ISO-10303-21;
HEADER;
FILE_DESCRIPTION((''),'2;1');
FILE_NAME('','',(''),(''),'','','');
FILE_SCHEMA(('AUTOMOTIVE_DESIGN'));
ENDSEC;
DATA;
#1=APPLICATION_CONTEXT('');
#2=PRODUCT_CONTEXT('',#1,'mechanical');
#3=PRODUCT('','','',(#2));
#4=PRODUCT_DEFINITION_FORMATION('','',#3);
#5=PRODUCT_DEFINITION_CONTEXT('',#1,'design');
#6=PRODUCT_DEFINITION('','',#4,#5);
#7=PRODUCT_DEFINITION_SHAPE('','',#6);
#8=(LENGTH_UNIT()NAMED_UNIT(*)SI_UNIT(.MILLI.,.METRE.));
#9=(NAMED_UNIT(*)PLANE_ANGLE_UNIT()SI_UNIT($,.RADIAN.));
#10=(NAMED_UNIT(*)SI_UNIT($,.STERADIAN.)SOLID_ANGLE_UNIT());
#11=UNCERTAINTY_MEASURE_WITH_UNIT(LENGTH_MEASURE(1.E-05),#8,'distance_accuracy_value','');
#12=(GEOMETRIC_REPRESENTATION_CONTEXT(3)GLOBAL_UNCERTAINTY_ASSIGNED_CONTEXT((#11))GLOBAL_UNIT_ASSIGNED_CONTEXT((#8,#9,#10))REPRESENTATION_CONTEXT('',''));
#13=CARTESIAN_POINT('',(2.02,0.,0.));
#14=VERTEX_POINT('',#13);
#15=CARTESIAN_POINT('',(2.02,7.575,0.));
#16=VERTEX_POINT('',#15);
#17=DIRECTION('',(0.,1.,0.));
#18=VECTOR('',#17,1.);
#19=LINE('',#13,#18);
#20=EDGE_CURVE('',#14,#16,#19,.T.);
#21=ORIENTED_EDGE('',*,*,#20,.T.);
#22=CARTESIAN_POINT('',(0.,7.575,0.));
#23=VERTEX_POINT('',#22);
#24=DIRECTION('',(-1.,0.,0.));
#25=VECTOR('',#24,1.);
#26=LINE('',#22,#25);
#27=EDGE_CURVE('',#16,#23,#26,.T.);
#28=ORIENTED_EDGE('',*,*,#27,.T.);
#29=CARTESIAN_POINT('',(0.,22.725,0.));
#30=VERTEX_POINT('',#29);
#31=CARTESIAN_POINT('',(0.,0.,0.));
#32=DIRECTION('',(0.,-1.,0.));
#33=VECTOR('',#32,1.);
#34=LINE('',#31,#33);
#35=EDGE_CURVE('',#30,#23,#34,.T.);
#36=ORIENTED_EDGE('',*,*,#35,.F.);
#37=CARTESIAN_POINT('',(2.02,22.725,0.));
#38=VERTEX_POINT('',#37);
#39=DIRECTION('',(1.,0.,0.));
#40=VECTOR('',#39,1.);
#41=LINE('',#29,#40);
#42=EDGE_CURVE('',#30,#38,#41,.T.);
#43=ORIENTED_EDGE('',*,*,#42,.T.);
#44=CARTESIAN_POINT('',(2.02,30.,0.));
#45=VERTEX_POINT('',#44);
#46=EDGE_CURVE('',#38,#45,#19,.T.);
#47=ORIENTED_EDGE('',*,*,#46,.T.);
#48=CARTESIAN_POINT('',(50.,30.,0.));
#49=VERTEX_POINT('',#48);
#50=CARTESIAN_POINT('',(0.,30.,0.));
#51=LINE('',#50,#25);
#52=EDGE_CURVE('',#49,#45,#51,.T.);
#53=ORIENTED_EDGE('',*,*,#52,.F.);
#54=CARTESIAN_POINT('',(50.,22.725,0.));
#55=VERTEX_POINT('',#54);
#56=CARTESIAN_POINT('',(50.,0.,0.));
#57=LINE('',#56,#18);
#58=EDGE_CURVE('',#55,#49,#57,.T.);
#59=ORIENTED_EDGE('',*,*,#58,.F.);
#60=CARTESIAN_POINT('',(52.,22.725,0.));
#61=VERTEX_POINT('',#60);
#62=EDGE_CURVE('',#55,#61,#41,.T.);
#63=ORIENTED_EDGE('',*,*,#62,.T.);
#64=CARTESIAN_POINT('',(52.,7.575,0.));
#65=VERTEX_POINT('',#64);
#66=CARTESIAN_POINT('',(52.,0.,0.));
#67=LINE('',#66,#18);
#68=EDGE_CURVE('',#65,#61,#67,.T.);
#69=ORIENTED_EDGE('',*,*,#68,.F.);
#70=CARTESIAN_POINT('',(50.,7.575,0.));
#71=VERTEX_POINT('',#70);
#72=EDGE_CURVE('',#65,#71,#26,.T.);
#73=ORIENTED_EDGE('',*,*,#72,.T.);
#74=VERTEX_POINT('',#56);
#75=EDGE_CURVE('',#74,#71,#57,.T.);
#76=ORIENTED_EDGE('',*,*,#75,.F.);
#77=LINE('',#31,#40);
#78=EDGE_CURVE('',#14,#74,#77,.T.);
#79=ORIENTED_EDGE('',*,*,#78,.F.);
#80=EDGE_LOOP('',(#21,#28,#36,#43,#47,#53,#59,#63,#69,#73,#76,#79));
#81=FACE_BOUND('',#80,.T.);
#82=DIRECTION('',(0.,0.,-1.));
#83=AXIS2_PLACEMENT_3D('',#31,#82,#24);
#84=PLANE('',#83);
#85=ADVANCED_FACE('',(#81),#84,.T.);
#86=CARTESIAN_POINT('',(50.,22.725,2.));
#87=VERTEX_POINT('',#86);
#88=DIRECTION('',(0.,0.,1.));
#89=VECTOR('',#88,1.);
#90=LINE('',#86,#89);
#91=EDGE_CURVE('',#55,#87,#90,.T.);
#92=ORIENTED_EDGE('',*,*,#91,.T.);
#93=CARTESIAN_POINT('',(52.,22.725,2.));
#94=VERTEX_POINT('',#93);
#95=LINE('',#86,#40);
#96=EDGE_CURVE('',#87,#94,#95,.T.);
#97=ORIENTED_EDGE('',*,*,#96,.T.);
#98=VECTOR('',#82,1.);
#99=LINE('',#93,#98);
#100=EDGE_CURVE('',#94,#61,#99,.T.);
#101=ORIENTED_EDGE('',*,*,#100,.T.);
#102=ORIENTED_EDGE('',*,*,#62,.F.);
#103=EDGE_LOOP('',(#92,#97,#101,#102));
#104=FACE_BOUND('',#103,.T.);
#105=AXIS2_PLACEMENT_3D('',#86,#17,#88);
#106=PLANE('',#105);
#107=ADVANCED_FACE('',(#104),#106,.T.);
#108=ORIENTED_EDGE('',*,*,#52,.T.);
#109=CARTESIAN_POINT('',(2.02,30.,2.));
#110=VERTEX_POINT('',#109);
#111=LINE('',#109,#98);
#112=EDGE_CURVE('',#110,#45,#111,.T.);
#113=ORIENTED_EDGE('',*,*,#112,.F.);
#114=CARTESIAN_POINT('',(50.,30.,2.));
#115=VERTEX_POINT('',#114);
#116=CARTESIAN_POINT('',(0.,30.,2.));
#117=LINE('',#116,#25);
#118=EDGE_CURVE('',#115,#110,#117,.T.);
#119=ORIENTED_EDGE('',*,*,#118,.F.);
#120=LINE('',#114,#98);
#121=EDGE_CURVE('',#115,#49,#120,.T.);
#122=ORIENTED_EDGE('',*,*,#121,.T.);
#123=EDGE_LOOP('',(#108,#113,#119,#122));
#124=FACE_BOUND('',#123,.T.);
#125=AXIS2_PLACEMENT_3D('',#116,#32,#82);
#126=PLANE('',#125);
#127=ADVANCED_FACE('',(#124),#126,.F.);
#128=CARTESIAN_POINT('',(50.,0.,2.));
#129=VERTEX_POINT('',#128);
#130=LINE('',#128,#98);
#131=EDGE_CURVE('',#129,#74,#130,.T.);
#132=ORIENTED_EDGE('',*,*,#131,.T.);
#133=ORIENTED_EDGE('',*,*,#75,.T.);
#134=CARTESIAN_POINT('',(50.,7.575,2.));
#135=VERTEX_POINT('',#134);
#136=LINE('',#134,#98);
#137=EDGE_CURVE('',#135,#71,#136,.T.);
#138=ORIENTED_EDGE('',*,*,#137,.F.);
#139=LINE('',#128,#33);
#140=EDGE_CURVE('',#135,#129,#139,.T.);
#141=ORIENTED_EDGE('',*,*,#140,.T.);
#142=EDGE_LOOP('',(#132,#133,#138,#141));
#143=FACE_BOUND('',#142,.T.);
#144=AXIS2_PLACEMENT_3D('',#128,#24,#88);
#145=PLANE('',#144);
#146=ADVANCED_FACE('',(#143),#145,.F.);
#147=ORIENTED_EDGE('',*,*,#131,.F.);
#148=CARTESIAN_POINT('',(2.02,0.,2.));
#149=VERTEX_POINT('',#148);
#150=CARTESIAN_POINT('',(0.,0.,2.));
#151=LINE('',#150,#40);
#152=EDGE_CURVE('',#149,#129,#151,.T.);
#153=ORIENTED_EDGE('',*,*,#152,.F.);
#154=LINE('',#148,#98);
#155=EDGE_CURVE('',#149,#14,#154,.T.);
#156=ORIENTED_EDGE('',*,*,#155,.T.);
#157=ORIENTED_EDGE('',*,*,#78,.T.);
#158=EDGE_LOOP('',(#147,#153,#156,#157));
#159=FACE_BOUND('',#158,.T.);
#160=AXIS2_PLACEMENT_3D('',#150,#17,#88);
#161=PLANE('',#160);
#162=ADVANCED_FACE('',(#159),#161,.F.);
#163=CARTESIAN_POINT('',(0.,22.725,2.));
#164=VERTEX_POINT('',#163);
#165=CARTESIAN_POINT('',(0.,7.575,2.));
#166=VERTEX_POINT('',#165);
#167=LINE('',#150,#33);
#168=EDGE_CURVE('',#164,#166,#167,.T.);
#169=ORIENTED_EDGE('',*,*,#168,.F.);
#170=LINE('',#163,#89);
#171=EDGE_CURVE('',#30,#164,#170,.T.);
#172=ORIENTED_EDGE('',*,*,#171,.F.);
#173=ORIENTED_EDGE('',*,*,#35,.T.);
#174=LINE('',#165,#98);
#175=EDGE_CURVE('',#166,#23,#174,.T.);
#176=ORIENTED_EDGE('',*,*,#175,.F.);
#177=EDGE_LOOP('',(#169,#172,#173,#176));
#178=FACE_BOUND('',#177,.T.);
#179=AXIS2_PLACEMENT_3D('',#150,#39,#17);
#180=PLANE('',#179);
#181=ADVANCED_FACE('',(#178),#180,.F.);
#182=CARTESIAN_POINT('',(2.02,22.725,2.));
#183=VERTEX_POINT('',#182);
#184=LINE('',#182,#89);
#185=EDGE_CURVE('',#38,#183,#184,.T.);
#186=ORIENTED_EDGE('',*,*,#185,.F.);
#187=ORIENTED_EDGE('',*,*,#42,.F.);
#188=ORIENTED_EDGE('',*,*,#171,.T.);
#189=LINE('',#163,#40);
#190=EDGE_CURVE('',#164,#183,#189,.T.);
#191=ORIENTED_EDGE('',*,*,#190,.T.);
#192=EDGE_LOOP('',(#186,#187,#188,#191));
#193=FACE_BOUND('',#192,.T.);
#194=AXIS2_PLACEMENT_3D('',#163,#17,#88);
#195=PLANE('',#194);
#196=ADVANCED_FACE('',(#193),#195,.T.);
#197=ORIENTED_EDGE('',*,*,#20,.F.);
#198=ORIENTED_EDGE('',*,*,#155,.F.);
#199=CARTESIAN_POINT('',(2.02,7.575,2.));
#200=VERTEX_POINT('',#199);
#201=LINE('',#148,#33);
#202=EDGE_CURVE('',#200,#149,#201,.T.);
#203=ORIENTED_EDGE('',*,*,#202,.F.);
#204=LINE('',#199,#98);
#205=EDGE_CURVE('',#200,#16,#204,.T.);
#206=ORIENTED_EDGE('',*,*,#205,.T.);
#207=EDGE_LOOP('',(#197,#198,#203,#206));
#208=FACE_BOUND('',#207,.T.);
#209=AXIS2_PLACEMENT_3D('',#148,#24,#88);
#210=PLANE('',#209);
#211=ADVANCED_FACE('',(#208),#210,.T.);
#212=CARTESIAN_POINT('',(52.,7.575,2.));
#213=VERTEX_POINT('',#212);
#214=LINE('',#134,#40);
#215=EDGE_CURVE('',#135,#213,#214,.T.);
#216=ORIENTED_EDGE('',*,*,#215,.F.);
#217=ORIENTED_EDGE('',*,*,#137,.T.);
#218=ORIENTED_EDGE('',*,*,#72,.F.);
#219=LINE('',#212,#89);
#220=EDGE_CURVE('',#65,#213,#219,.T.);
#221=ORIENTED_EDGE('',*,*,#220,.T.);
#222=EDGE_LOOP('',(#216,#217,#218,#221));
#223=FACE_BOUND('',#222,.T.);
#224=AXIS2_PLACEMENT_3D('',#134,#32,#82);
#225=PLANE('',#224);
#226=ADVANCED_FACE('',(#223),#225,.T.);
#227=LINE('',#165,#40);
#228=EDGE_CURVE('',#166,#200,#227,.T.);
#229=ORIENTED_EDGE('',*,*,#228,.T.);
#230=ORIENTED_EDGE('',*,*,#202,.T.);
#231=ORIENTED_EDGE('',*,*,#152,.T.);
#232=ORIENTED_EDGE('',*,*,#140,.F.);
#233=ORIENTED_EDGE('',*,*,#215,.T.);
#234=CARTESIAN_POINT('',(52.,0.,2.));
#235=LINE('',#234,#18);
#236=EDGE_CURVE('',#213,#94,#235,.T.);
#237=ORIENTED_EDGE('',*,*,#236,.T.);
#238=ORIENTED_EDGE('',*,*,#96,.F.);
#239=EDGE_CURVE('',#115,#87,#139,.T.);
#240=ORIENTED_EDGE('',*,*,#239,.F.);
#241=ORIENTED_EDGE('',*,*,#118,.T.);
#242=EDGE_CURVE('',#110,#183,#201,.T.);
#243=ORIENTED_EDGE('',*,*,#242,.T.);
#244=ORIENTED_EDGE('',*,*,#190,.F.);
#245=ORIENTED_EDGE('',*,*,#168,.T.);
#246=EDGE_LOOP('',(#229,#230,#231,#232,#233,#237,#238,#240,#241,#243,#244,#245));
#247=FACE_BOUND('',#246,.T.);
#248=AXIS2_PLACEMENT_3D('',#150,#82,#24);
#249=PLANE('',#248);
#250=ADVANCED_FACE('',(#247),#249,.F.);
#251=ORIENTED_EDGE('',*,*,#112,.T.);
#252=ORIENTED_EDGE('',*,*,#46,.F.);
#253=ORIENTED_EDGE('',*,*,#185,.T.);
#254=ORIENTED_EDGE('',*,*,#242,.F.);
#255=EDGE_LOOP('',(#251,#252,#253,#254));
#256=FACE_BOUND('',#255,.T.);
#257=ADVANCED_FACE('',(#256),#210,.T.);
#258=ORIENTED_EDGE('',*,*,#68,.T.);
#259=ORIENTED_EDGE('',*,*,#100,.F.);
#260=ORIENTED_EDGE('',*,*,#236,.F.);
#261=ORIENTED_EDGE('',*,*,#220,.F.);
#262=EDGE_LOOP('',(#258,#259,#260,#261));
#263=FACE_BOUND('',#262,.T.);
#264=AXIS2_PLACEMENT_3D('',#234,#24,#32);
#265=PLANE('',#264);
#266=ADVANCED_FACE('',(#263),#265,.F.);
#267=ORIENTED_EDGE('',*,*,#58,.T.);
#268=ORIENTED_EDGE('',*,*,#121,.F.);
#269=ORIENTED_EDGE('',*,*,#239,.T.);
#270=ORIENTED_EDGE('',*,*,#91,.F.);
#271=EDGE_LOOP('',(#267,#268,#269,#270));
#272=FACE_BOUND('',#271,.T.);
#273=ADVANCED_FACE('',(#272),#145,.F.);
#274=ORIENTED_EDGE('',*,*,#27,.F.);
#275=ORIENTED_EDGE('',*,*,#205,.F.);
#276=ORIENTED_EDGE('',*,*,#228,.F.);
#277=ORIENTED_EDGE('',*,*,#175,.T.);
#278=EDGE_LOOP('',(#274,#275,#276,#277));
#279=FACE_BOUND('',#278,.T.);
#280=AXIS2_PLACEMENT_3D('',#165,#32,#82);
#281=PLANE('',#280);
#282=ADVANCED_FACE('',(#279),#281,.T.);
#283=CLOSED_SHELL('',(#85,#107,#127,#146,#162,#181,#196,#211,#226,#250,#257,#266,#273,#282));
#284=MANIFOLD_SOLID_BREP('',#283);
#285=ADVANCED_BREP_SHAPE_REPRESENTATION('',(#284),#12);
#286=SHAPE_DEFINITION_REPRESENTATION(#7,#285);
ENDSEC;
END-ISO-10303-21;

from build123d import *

# Parameters (mm, degrees)
ESQUISSE1_W              = 52
ESQUISSE1_H              = 30
BOSS_EXTRU_1_DEPTH       = 2
EMPREINTE2_OUTLINE_W     = 2
EMPREINTE2_OUTLINE_H     = 2
EMPREINTE2_OUTLINE_W_2   = 2.02
EMPREINTE2_DEPTH         = 7.575
EMPREINTE2_START         = 22.725
EMPREINTE2_2_OUTLINE_W   = 2
EMPREINTE2_2_OUTLINE_H   = 2
EMPREINTE2_2_OUTLINE_W_2 = 2.02
EMPREINTE2_2_DEPTH       = 7.275


# Read off the part's stored shape, not the designer's step: Empreinte2
with BuildPart() as part:
    # Esquisse1 → Boss.-Extru.1 (new body)
    with BuildSketch(Plane.XY):
        with Locations((26, 15)):
            Rectangle(ESQUISSE1_W, ESQUISSE1_H)
    extrude(amount=BOSS_EXTRU_1_DEPTH)

    # Empreinte2 outline → Empreinte2 (cut)
    with BuildSketch(Plane(origin=(0, 0, 0), x_dir=(1, 0, 0), z_dir=(0, 1, 0))):
        with Locations((51, -1)):
            Rectangle(EMPREINTE2_OUTLINE_W, EMPREINTE2_OUTLINE_H)
        with Locations((1.01, -1)):
            Rectangle(EMPREINTE2_OUTLINE_W_2, EMPREINTE2_OUTLINE_H)
    extrude(amount=EMPREINTE2_DEPTH, mode=Mode.SUBTRACT)

    # Empreinte2 2 outline → Empreinte2 2 (cut)
    with BuildSketch(Plane(origin=(0, 0, 0), x_dir=(1, 0, 0), z_dir=(0, 1, 0)).offset(EMPREINTE2_START)):
        with Locations((51, -1)):
            Rectangle(EMPREINTE2_2_OUTLINE_W, EMPREINTE2_2_OUTLINE_H)
        with Locations((1.01, -1)):
            Rectangle(EMPREINTE2_2_OUTLINE_W_2, EMPREINTE2_2_OUTLINE_H)
    extrude(amount=EMPREINTE2_2_DEPTH, mode=Mode.SUBTRACT)


solid = part.part
